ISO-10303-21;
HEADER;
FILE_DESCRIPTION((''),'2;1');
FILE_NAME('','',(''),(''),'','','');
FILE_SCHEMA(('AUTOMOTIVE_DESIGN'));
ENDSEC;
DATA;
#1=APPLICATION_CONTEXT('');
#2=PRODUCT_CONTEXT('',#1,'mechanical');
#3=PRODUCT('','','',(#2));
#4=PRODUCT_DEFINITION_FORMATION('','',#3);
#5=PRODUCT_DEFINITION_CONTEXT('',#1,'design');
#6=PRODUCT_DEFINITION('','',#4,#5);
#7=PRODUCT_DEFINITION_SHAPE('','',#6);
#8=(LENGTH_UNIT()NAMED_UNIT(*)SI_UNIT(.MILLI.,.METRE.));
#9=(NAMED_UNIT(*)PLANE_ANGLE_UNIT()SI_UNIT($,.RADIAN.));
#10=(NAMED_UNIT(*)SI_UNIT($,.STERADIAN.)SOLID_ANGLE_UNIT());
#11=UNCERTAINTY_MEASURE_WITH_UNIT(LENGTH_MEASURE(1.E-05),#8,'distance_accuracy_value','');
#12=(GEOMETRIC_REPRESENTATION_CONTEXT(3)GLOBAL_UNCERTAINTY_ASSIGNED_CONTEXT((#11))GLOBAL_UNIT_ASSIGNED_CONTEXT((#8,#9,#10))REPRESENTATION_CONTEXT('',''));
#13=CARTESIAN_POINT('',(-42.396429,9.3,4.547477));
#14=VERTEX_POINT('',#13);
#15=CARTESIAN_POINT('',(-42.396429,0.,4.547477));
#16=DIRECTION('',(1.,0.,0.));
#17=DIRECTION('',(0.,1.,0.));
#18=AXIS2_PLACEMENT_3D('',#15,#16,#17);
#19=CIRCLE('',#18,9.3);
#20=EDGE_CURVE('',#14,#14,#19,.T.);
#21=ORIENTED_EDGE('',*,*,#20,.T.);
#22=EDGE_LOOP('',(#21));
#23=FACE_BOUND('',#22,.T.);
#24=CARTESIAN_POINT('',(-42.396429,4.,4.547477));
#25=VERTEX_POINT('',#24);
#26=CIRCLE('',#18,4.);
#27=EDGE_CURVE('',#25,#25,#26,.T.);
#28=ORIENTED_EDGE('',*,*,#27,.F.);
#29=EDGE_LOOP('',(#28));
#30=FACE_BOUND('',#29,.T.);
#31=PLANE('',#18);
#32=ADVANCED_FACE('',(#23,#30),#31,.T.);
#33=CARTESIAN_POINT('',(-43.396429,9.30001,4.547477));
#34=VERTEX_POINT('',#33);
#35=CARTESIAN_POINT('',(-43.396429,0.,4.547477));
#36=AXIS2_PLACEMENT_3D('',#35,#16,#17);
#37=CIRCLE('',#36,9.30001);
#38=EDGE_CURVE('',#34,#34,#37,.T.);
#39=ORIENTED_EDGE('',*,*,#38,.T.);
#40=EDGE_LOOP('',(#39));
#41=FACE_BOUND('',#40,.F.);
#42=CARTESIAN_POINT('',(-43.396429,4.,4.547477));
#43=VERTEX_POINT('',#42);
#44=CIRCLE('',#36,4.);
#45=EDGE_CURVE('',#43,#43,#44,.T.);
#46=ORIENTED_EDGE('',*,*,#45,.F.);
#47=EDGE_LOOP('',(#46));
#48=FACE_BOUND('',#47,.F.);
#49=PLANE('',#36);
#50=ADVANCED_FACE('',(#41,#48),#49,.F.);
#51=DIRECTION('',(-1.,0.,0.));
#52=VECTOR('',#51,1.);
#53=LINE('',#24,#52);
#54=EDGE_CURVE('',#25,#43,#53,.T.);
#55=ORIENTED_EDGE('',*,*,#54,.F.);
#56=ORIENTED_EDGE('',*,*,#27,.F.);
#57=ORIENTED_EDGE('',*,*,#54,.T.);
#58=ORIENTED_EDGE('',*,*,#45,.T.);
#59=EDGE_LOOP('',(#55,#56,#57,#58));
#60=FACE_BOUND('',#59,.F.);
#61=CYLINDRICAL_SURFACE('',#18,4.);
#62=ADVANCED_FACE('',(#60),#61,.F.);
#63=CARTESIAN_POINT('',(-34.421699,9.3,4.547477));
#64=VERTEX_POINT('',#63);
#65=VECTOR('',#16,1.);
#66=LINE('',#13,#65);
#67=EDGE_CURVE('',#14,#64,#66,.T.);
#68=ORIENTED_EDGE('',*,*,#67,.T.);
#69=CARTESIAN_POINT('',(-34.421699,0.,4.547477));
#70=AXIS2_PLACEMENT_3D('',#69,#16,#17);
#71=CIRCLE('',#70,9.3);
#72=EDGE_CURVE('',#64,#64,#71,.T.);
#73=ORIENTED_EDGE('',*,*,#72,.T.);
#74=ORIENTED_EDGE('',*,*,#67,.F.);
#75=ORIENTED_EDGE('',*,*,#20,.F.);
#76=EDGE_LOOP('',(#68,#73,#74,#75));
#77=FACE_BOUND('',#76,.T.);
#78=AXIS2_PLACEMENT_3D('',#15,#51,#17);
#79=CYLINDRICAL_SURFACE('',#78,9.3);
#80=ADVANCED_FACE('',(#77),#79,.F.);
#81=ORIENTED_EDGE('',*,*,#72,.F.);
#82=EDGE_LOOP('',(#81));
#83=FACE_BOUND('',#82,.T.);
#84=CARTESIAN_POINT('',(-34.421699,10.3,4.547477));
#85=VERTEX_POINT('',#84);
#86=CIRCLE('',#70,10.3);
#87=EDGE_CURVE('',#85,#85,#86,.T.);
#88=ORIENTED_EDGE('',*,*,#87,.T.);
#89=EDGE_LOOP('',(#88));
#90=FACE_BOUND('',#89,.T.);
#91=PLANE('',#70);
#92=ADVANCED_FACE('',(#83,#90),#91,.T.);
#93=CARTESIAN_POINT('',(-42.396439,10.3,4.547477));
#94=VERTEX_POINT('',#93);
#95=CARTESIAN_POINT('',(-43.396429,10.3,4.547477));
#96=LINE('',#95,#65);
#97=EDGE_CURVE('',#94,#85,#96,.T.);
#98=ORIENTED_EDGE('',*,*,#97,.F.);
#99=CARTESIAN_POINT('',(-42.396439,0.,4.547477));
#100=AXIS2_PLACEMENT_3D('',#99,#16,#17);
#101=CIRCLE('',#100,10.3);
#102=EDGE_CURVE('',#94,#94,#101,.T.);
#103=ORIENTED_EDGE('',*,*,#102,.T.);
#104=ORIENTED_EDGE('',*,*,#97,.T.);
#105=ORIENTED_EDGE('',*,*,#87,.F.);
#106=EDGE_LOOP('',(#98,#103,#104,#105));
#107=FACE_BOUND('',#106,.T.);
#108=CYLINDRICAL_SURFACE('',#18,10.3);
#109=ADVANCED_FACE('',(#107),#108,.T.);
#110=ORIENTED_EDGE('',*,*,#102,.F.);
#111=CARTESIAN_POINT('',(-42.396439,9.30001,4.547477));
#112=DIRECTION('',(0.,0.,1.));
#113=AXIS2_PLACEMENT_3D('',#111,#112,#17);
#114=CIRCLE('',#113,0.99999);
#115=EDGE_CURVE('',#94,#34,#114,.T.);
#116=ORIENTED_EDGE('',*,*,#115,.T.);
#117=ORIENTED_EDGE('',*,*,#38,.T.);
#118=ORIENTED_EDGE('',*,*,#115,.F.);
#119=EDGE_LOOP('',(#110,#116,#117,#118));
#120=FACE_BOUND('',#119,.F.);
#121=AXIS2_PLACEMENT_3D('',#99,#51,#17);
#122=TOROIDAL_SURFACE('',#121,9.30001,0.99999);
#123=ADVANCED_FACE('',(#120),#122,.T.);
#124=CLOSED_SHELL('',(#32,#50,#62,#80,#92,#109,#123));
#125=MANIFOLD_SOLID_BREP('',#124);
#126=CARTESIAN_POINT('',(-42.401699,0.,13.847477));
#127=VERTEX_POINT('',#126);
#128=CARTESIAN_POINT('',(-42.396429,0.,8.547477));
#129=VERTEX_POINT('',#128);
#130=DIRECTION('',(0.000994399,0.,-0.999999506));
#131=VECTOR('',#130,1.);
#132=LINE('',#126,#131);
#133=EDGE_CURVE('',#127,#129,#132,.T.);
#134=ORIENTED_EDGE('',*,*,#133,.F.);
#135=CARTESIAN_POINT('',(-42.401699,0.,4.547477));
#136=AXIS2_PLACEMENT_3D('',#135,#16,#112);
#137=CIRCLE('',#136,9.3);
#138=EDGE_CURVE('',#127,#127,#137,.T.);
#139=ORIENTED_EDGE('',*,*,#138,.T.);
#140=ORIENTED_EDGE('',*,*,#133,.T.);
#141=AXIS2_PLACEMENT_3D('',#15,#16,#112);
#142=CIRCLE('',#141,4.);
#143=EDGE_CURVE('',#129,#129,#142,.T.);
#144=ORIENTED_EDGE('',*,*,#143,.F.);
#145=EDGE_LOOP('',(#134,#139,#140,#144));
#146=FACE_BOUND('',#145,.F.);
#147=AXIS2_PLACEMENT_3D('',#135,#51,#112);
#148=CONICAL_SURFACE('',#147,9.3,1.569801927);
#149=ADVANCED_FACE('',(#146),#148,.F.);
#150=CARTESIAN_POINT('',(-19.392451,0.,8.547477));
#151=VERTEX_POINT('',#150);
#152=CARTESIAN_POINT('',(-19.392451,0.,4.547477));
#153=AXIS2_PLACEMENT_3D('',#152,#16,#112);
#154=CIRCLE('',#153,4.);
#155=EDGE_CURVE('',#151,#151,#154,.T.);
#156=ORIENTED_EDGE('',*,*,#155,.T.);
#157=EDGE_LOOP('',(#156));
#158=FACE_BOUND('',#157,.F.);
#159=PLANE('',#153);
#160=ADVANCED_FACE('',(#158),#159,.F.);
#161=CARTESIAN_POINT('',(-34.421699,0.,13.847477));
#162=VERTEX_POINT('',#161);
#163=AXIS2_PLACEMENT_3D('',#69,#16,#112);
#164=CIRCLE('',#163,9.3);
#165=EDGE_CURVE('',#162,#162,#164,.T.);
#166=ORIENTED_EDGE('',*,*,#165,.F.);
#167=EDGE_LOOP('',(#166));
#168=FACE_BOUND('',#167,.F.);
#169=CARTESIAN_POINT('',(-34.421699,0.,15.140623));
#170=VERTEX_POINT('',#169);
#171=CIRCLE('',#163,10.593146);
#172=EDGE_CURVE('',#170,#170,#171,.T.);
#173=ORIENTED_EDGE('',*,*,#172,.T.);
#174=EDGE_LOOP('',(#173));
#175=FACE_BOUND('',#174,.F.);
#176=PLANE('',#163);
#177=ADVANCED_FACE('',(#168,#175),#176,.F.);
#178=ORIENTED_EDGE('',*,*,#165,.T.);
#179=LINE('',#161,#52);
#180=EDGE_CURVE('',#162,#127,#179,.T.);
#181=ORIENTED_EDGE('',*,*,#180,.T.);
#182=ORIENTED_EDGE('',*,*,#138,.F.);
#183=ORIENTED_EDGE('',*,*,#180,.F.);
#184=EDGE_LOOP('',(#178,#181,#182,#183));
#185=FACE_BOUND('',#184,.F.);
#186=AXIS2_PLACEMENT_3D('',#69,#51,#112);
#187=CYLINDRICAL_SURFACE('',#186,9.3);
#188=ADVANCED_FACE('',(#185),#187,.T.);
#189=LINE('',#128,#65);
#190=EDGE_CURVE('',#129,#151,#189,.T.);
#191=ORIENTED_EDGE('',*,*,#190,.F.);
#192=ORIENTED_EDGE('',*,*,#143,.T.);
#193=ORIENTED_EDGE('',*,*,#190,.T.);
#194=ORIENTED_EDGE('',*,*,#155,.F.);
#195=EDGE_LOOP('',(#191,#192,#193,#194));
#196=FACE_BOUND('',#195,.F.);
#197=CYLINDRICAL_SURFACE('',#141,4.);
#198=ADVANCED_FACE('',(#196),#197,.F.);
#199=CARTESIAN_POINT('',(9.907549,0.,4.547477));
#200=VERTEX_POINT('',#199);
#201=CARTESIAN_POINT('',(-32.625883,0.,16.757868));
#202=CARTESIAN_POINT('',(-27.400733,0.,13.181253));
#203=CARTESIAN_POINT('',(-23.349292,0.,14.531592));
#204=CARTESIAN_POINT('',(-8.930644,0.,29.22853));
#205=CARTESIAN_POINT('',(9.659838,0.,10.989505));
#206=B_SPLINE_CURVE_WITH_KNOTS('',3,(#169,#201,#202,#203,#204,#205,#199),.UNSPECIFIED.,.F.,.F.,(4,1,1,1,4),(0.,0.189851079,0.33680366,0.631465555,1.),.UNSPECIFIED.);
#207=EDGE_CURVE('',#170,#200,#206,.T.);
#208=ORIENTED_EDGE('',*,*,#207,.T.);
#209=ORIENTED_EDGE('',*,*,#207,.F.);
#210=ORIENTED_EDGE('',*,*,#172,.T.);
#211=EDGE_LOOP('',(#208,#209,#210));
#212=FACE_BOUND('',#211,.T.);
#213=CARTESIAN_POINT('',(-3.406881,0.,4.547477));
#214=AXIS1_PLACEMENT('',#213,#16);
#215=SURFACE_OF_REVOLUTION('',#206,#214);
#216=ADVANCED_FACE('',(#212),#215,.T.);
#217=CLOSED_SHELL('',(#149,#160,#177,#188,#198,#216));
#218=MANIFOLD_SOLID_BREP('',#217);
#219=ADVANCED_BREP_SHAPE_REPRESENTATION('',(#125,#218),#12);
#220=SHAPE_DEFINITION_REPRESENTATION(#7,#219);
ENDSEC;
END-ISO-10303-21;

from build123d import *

# Parameters (mm, degrees)
F3_R     = 10.3
F3_R_2   = 9.3
F4_DEPTH = 7.9747296804
F3_R_3   = 4
F5_DEPTH = 1
F6_R     = 0.99999


# Not quite as in the source:
# - a fillet or chamfer is up to 0.001 mm smaller than in the source, because OpenCascade refuses the exact size


with BuildPart() as f1:
    # F0 (on Front) → F1 (revolve)
    with BuildSketch(Plane.XZ):
        with BuildLine():
            Line((-34.4216992354, 13.8474768028), (-42.4016992354, 13.8474768028))
            Line((-42.4016992354, 13.8474768028), (-42.3964289158, 8.5474768028))
            Line((-42.3964289158, 8.5474768028), (-19.3924513161, 8.5474768028))
            Line((-19.3924513161, 8.5474768028), (-19.3924513161, 4.5474768028))
            Line((-19.3924513161, 4.5474768028), (-16.721310094, 4.5474768028))
            Line((-16.721310094, 4.5474768028), (9.9075486839, 4.5474768028))
            add(Edge.make_bspline(
                [(-34.4216992354, 15.1406228542), (-32.625882799, 16.7578682962), (-27.4007330199, 13.1812527445), (-23.3492915473, 14.5315919009), (-8.9306439772, 29.2285299601), (9.6598378671, 10.9895048612), (9.9075486839, 4.5474768028)],
                knots=[0, 0, 0, 0, 0.1898510794, 0.3368036599, 0.6314655551, 1, 1, 1, 1], degree=3))
            Line((-34.4216992354, 15.1406228542), (-34.4216992354, 13.8474768028))
        make_face()
    revolve(axis=Axis((-3.4068807051, 0, 4.5474768028), (1, 0, 0)))


with BuildPart() as f4:
    # F3 (on plane+point) → F4 (new body, through all)
    with BuildSketch(Plane.YZ.offset(-42.3964289158)):
        with Locations((0, 4.5474768028)):
            Circle(F3_R)
        with Locations((0, 4.5474768028)):
            Circle(F3_R_2, mode=Mode.SUBTRACT)
    extrude(amount=F4_DEPTH)

    # F3 (on plane+point) → F5 (join)
    with BuildSketch(Plane.YZ.offset(-42.3964289158)):
        with Locations((0, 4.5474768028)):
            Circle(F3_R)
        with Locations((0, 4.5474768028)):
            Circle(F3_R_2, mode=Mode.SUBTRACT)
        with Locations((0, 4.5474768028)):
            Circle(F3_R_2)
        with Locations((0, 4.5474768028)):
            Circle(F3_R_3, mode=Mode.SUBTRACT)
    extrude(amount=-F5_DEPTH)

    # F6 (radius 1 in the source; OpenCascade refuses exactly that, so slightly less here)
    f6_edges = [f4.edges().sort_by_distance(p)[0] for p in [
        (-43.396429, -10.3, 4.547477),
    ]]
    fillet(f6_edges, radius=F6_R)


solid = Compound([f1.part, f4.part])
